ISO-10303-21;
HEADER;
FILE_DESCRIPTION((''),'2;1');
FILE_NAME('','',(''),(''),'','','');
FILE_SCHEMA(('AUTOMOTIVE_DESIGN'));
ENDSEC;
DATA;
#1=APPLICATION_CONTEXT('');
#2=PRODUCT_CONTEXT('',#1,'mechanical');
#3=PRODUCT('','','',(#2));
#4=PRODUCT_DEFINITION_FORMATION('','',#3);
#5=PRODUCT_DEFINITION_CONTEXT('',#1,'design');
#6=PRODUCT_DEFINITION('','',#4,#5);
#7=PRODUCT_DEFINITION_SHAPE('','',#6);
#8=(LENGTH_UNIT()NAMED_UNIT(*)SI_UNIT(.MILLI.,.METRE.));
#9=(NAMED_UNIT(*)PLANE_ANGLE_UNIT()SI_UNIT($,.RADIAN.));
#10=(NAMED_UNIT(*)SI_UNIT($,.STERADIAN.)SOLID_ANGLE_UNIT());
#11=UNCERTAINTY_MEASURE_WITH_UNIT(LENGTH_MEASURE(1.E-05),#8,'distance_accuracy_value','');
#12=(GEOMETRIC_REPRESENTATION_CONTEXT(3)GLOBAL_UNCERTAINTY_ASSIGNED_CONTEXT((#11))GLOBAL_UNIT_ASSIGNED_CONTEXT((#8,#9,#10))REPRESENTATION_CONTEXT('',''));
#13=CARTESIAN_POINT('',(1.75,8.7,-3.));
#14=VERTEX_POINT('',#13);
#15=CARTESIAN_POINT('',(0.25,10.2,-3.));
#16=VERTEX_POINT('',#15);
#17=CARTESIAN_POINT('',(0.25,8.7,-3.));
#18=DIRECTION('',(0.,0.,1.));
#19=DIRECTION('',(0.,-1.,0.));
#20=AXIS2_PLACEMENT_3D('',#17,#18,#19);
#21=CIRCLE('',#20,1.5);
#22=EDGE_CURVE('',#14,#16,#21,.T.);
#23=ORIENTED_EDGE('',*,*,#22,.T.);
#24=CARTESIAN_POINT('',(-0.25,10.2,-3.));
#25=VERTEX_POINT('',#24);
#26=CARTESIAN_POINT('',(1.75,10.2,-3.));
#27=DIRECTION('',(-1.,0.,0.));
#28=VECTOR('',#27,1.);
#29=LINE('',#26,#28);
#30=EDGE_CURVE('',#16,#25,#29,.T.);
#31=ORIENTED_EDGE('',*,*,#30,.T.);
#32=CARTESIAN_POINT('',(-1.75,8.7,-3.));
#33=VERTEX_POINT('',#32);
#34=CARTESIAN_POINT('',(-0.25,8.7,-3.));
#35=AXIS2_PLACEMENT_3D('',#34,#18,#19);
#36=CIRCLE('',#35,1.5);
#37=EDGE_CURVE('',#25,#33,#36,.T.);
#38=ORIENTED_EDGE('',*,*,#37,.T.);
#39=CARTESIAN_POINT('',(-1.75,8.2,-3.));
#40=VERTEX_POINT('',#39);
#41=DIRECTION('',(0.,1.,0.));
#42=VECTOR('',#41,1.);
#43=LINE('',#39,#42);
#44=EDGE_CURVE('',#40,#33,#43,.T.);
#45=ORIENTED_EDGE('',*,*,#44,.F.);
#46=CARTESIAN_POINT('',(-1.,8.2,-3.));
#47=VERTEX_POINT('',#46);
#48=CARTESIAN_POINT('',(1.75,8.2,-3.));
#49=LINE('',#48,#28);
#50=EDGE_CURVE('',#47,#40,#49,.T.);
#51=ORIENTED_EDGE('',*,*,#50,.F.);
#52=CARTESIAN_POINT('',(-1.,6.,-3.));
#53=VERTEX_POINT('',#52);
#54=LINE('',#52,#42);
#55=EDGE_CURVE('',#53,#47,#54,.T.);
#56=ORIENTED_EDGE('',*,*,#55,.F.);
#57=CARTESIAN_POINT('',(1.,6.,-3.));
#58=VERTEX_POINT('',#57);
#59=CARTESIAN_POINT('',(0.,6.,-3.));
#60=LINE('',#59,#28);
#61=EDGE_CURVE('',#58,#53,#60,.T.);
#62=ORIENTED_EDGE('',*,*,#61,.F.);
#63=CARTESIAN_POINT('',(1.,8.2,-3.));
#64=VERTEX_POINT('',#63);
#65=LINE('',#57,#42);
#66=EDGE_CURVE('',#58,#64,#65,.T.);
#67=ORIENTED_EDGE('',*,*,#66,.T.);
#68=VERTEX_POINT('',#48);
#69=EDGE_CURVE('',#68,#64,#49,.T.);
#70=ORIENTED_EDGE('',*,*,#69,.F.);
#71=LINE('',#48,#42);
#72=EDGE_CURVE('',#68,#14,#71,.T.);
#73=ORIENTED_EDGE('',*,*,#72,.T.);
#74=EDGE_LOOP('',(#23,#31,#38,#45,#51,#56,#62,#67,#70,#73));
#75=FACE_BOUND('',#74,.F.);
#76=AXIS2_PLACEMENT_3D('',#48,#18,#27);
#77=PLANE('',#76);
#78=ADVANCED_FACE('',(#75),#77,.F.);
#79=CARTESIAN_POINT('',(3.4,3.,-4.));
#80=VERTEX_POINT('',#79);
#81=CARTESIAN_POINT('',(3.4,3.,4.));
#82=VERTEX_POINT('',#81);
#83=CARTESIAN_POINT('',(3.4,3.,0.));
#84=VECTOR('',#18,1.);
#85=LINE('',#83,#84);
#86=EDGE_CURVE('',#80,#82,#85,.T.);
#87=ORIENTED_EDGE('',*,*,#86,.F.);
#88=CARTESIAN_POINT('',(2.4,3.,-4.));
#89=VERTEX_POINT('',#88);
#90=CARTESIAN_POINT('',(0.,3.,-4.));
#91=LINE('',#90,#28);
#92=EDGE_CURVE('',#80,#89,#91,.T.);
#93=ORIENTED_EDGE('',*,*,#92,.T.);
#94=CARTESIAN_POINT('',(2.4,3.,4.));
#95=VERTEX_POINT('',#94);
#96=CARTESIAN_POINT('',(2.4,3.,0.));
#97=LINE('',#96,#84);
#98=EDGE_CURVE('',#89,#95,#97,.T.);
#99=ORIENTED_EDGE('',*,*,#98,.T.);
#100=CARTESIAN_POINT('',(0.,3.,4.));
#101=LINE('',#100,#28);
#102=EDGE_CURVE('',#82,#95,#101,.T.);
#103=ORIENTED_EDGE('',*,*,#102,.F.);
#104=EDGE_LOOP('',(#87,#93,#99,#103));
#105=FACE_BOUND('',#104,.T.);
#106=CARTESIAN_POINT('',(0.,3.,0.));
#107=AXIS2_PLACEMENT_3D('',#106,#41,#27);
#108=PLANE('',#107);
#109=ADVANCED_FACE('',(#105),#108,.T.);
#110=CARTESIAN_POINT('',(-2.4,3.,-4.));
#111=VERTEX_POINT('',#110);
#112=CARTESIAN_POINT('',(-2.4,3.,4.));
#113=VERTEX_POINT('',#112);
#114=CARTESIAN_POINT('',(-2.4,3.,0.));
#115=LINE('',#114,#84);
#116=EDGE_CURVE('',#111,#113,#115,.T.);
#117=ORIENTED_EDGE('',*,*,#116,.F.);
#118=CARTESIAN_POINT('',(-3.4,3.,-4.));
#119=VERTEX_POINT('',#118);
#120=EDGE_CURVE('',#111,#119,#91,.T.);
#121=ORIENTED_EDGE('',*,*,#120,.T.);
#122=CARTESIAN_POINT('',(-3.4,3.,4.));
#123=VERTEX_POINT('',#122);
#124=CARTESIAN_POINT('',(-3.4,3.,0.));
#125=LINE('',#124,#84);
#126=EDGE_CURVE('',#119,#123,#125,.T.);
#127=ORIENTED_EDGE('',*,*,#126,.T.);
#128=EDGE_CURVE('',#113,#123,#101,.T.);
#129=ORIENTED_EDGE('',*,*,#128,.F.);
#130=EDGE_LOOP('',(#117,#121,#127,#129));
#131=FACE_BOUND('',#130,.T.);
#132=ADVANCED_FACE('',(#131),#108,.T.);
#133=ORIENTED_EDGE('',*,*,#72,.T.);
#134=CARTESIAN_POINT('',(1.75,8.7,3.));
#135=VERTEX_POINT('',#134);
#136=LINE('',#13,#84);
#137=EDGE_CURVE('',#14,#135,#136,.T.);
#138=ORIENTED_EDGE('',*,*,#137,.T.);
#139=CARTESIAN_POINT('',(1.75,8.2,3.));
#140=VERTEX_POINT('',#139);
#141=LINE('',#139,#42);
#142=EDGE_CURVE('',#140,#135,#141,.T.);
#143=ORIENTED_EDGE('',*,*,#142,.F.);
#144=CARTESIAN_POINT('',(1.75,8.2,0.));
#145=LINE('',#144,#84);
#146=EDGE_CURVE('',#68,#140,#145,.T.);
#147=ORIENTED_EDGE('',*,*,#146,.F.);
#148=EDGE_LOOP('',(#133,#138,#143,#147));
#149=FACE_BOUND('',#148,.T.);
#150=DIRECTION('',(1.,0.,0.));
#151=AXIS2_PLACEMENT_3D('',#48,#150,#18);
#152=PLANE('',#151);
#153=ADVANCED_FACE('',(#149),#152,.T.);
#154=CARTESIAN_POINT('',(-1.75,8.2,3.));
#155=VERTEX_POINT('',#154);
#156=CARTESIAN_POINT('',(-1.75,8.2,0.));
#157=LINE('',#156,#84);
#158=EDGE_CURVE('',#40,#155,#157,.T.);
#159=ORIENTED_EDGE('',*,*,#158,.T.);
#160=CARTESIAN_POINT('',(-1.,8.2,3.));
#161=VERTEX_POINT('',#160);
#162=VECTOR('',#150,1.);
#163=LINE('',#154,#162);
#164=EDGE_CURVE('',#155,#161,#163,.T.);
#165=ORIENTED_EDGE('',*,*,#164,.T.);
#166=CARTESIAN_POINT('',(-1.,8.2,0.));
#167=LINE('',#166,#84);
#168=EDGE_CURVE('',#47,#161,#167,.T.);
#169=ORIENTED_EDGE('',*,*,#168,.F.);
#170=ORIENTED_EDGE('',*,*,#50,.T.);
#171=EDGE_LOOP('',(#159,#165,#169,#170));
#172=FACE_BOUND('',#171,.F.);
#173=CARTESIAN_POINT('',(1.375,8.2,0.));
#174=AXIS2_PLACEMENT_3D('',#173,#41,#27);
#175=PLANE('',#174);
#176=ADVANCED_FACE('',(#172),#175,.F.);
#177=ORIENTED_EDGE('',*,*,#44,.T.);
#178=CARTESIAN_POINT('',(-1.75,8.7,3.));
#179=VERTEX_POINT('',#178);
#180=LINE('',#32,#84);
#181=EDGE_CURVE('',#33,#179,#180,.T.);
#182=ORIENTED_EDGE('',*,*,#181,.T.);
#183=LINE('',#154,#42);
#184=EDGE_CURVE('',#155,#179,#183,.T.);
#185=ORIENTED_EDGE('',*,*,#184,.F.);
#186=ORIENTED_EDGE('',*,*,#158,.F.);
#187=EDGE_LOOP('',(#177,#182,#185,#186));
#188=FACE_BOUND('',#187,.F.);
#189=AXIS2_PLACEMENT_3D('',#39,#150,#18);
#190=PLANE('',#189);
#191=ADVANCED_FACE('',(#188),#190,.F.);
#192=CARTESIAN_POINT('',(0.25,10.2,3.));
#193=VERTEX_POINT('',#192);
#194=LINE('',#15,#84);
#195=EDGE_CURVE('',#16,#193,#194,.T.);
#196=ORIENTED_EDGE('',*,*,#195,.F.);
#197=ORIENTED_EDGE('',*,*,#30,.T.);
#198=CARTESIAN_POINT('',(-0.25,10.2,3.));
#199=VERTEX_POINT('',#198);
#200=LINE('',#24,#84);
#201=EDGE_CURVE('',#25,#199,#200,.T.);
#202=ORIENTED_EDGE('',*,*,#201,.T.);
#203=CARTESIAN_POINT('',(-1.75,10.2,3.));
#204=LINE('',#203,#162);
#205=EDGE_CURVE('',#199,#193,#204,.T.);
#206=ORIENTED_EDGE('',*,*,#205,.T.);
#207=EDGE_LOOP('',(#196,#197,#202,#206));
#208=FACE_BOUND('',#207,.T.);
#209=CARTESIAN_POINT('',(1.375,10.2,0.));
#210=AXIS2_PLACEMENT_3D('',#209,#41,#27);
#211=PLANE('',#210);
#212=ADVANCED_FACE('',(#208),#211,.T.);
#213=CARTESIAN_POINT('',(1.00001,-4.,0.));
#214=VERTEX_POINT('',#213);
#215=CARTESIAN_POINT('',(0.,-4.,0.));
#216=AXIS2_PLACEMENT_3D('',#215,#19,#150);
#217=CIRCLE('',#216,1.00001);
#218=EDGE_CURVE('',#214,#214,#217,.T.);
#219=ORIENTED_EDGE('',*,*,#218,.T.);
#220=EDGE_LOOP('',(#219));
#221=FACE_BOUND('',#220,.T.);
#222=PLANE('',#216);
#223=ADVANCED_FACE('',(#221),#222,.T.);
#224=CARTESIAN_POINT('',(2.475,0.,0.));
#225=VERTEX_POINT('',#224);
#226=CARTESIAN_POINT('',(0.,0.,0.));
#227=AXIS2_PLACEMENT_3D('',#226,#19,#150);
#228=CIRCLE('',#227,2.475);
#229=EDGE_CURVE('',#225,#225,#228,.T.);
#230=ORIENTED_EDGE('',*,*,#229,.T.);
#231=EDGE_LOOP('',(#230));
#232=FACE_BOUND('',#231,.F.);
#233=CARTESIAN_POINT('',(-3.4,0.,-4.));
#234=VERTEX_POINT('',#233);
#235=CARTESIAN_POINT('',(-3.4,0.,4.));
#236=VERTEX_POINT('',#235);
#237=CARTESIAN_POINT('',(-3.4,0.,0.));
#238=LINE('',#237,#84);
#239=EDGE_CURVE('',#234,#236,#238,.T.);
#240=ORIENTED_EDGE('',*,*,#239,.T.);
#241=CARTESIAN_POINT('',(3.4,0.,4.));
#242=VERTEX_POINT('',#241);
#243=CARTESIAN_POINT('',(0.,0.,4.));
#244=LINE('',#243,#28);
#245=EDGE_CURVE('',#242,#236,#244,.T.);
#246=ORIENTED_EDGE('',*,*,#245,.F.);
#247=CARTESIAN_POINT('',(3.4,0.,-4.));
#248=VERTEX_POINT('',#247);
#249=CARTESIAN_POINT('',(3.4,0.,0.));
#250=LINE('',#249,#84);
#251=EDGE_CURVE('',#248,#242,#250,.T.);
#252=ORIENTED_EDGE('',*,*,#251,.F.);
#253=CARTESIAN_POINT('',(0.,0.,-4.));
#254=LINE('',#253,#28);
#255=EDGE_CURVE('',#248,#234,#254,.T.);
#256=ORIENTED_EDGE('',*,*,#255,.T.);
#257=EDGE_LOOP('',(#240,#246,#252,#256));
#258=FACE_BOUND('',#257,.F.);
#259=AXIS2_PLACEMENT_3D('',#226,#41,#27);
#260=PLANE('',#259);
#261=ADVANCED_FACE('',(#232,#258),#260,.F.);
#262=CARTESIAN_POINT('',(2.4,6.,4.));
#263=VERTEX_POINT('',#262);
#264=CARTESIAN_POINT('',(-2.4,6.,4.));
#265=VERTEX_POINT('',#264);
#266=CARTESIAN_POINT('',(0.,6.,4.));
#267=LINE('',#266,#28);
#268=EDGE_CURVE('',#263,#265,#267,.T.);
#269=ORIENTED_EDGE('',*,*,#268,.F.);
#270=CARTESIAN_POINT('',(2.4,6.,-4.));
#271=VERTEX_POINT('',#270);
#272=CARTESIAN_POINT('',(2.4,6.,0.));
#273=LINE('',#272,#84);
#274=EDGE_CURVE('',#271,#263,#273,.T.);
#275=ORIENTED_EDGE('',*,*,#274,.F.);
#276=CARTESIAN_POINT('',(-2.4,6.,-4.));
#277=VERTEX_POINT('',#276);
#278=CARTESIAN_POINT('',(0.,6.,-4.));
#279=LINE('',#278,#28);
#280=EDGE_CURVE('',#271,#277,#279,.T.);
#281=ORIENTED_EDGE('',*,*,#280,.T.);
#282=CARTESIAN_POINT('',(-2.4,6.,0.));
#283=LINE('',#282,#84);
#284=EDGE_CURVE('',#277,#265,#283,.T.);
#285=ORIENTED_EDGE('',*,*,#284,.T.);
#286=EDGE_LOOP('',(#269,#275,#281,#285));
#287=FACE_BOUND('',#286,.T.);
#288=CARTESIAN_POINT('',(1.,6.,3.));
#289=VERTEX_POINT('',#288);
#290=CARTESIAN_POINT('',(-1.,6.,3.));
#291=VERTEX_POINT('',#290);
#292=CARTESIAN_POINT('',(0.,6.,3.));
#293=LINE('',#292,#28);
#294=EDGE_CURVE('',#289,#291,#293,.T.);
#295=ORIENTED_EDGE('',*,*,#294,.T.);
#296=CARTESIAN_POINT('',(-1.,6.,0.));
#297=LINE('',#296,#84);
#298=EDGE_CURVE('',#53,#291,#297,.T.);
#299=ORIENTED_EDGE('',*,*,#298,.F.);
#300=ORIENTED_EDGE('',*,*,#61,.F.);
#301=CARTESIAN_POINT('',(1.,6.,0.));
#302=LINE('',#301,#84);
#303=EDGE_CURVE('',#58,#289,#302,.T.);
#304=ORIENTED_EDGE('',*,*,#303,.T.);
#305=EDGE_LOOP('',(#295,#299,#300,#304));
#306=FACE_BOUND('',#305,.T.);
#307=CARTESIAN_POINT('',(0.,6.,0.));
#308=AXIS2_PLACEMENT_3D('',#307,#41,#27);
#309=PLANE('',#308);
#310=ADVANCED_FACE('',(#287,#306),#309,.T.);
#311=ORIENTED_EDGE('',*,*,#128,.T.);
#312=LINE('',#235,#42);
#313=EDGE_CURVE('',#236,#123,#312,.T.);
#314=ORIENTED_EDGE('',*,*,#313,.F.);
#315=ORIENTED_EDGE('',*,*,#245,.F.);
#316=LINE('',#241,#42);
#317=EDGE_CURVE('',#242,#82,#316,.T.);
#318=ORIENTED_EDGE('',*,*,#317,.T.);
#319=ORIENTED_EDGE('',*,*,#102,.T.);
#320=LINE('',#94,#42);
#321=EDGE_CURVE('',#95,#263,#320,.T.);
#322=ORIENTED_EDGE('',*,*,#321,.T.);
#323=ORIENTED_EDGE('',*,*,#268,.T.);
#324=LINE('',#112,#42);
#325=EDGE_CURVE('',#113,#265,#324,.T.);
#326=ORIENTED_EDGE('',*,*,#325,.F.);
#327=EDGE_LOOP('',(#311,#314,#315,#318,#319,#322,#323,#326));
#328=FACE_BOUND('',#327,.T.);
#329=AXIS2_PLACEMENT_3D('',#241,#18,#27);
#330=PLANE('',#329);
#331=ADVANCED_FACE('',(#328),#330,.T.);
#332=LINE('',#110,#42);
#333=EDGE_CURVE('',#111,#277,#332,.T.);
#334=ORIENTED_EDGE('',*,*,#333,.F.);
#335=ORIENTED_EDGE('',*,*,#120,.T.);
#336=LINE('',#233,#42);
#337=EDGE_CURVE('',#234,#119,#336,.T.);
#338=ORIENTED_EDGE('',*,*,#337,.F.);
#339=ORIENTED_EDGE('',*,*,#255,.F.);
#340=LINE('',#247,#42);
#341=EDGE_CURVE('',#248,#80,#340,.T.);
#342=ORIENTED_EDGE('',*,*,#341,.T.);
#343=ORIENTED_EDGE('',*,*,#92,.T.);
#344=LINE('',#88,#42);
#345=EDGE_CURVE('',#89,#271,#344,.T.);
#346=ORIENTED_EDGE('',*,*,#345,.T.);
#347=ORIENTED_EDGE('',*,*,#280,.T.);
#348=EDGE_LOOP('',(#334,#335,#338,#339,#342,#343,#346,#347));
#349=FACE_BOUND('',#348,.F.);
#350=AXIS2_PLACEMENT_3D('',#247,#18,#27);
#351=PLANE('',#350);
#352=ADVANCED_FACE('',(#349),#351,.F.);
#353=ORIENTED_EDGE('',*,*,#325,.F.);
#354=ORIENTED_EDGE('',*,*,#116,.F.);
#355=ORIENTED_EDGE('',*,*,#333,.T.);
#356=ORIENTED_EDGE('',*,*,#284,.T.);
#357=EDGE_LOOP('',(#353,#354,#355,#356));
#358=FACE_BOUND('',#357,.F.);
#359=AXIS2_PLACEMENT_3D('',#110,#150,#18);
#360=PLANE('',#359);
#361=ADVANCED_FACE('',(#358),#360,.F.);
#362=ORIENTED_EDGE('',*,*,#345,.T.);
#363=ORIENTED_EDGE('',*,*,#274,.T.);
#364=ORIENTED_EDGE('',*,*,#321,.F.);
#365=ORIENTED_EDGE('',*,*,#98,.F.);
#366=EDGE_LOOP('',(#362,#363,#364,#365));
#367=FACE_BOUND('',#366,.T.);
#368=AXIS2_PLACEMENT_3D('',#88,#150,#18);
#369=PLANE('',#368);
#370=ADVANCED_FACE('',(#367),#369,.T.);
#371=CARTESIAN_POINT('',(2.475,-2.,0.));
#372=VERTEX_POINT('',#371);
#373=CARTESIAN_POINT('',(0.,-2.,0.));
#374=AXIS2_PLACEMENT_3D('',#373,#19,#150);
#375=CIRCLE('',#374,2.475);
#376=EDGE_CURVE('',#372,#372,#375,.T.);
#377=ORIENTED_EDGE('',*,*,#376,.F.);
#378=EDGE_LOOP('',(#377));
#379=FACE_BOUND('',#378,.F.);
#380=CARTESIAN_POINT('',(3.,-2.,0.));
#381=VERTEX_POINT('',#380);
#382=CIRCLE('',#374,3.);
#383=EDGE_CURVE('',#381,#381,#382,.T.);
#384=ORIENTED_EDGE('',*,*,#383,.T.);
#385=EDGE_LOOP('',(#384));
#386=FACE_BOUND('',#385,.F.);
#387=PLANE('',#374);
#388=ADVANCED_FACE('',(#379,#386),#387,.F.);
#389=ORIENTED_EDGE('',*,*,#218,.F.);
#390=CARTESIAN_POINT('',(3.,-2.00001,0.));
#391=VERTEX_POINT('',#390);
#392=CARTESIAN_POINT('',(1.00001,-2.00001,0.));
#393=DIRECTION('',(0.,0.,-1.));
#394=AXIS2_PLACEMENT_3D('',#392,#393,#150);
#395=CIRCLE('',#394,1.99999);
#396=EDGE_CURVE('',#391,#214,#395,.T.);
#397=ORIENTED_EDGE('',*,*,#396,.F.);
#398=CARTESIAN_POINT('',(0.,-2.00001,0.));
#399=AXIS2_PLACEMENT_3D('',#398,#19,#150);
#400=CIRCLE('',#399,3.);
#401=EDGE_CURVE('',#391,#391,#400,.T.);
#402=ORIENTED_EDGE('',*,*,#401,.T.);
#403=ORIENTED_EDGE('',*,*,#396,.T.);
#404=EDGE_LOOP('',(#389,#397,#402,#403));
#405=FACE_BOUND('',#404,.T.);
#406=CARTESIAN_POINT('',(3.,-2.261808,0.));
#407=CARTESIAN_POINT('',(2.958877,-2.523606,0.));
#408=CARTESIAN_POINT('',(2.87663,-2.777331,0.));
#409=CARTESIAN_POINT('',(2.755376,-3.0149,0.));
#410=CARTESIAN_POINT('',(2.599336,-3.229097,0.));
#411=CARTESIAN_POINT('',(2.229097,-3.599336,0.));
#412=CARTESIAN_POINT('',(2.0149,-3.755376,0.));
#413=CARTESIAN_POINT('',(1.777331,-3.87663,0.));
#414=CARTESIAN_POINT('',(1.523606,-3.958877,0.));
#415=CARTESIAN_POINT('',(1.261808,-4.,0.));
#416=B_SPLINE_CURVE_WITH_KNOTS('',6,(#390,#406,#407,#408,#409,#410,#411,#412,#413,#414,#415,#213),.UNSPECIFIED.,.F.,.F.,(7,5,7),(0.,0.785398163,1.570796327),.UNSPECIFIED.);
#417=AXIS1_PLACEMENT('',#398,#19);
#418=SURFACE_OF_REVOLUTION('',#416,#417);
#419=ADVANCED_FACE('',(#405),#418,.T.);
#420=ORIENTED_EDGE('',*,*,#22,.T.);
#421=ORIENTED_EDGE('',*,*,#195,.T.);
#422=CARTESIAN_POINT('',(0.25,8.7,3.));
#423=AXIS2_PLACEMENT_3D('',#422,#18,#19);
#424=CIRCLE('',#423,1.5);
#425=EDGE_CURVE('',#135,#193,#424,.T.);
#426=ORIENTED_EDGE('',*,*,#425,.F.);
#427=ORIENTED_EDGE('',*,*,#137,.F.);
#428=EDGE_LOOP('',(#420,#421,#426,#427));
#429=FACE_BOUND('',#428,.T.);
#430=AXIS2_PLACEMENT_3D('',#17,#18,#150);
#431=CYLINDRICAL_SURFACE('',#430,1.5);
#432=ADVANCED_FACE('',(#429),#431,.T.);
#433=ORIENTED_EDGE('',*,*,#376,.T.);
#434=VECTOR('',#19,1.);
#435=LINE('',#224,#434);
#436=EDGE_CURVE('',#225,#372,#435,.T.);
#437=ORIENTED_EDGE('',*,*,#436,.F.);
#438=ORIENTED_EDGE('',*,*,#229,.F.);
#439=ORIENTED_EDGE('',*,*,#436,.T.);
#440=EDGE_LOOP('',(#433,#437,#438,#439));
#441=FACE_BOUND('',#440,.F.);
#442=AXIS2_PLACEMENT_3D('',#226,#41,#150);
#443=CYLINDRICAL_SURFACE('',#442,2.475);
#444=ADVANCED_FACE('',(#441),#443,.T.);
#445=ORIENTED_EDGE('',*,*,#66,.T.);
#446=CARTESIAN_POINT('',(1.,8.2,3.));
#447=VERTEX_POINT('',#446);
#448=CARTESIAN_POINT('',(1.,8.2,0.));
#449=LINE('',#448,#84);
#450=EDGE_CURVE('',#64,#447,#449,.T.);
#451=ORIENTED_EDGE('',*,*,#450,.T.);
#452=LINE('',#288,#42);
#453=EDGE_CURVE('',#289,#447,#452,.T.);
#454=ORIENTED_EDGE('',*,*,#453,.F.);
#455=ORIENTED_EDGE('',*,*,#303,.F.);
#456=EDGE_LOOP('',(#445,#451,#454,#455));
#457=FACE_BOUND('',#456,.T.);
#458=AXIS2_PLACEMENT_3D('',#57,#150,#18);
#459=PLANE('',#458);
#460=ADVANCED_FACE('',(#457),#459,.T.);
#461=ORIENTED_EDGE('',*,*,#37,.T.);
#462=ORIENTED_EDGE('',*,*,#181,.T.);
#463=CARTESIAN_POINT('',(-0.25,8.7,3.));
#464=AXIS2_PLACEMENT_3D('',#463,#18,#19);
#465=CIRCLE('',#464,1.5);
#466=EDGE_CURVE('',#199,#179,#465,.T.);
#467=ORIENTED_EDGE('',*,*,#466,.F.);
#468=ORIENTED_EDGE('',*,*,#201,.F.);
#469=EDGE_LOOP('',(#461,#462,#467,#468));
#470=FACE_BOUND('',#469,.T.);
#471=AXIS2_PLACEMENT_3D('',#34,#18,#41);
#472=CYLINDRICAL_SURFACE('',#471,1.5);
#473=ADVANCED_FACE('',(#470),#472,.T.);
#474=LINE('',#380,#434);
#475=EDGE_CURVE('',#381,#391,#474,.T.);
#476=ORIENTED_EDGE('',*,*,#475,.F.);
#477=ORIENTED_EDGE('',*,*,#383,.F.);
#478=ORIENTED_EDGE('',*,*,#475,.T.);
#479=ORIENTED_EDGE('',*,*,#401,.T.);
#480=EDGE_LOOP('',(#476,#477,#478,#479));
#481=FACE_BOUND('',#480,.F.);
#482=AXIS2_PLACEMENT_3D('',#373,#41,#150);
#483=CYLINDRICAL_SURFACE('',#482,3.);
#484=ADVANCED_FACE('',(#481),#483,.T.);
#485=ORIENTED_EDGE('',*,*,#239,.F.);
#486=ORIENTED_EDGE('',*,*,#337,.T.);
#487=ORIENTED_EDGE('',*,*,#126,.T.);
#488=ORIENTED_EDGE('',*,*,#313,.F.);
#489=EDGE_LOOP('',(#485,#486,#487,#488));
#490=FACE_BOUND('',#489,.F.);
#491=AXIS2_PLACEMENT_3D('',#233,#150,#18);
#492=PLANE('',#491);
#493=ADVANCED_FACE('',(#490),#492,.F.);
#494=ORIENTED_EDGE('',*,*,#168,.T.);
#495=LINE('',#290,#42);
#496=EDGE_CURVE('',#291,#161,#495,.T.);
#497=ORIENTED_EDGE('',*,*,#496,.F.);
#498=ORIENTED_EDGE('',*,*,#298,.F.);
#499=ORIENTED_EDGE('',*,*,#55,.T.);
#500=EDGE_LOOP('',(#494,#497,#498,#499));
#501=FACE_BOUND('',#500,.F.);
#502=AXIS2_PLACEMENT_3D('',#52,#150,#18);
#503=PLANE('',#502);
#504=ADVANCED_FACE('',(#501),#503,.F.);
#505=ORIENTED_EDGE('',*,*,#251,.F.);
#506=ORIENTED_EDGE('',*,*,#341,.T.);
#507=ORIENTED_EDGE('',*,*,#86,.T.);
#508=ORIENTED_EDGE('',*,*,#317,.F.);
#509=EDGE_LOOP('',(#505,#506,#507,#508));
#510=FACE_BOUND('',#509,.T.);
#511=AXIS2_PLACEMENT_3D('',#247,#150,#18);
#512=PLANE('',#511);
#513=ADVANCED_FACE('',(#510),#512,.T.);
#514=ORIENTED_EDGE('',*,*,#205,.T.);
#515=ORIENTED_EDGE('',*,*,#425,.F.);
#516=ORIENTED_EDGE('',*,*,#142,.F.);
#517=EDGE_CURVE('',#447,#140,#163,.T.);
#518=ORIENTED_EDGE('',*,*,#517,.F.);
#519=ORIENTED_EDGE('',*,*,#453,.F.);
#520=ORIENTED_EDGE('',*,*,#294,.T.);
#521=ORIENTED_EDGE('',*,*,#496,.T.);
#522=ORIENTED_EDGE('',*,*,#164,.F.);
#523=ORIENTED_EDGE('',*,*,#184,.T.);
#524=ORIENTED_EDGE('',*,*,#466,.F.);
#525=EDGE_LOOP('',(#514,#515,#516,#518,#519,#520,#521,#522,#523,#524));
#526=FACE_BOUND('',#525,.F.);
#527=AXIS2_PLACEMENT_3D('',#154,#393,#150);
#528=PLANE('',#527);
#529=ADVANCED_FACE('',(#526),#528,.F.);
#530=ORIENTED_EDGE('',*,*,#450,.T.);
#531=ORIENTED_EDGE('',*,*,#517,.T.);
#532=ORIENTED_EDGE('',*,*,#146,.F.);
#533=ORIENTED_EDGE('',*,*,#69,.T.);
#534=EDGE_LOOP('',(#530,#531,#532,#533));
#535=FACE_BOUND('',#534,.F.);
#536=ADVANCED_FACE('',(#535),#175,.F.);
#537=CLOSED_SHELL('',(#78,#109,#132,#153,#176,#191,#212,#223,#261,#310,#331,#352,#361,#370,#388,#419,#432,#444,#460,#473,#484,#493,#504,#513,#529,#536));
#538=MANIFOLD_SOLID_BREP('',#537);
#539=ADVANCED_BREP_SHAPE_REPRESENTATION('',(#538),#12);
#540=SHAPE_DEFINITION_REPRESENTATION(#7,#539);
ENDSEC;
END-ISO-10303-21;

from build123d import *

# Parameters (mm, degrees)
F0_R      = 2.475
F1_DEPTH  = 2
F2_R      = 3
F3_DEPTH  = 2
F4_R      = 1.99999
F5_W      = 6.8
F5_H      = 8
F5_R      = 2.475
F6_DEPTH  = 3
F7_W      = 4.8
F7_H      = 8
F8_DEPTH  = 3
F9_W      = 2
F9_H      = 6
F10_DEPTH = 2.2
F11_W     = 0.75
F11_H     = 6
F11_W_2   = 2
F12_DEPTH = 2
F13_R     = 1.5


# Not quite as in the source:
# - a fillet or chamfer is up to 0.001 mm smaller than in the source, because OpenCascade refuses the exact size


with BuildPart() as f1:
    # F0 (on Front) → F1 (new body)
    with BuildSketch(Plane.XZ):
        Circle(F0_R)
    extrude(amount=F1_DEPTH)

    # F2 (on face) → F3 (join)
    with BuildSketch(Plane.XZ.offset(2)):
        Circle(F2_R)
    extrude(amount=F3_DEPTH)

    # F4 (radius 2 in the source; OpenCascade refuses exactly that, so slightly less here)
    f4_edges = [f1.edges().sort_by_distance(p)[0] for p in [
        (-3, -4, 0),
    ]]
    fillet(f4_edges, radius=F4_R)

    # F5 (on face) → F6 (join)
    with BuildSketch(Plane(origin=(0, 0, 0), x_dir=(-1, 0, 0), z_dir=(0, 1, 0))):
        Rectangle(F5_W, F5_H)
        Circle(F5_R, mode=Mode.SUBTRACT)
        Circle(F5_R)
    extrude(amount=F6_DEPTH)

    # F7 (on face) → F8 (join)
    with BuildSketch(Plane(origin=(0, 3, 0), x_dir=(-1, 0, 0), z_dir=(0, 1, 0))):
        Rectangle(F7_W, F7_H)
    extrude(amount=F8_DEPTH)

    # F9 (on face) → F10 (join)
    with BuildSketch(Plane(origin=(0, 6, 0), x_dir=(-1, 0, 0), z_dir=(0, 1, 0))):
        Rectangle(F9_W, F9_H)
    extrude(amount=F10_DEPTH)

    # F11 (on face) → F12 (join)
    with BuildSketch(Plane(origin=(0, 8.2, 0), x_dir=(-1, 0, 0), z_dir=(0, 1, 0))):
        with Locations((-1.375, 0)):
            Rectangle(F11_W, F11_H)
        Rectangle(F11_W_2, F11_H)
        with Locations((1.375, 0)):
            Rectangle(F11_W, F11_H)
    extrude(amount=F12_DEPTH)

    # F13
    f13_edges = [f1.edges().sort_by_distance(p)[0] for p in [
        (1.75, 10.2, 0),
        (-1.75, 10.2, 0),
    ]]
    fillet(f13_edges, radius=F13_R)


solid = f1.part
